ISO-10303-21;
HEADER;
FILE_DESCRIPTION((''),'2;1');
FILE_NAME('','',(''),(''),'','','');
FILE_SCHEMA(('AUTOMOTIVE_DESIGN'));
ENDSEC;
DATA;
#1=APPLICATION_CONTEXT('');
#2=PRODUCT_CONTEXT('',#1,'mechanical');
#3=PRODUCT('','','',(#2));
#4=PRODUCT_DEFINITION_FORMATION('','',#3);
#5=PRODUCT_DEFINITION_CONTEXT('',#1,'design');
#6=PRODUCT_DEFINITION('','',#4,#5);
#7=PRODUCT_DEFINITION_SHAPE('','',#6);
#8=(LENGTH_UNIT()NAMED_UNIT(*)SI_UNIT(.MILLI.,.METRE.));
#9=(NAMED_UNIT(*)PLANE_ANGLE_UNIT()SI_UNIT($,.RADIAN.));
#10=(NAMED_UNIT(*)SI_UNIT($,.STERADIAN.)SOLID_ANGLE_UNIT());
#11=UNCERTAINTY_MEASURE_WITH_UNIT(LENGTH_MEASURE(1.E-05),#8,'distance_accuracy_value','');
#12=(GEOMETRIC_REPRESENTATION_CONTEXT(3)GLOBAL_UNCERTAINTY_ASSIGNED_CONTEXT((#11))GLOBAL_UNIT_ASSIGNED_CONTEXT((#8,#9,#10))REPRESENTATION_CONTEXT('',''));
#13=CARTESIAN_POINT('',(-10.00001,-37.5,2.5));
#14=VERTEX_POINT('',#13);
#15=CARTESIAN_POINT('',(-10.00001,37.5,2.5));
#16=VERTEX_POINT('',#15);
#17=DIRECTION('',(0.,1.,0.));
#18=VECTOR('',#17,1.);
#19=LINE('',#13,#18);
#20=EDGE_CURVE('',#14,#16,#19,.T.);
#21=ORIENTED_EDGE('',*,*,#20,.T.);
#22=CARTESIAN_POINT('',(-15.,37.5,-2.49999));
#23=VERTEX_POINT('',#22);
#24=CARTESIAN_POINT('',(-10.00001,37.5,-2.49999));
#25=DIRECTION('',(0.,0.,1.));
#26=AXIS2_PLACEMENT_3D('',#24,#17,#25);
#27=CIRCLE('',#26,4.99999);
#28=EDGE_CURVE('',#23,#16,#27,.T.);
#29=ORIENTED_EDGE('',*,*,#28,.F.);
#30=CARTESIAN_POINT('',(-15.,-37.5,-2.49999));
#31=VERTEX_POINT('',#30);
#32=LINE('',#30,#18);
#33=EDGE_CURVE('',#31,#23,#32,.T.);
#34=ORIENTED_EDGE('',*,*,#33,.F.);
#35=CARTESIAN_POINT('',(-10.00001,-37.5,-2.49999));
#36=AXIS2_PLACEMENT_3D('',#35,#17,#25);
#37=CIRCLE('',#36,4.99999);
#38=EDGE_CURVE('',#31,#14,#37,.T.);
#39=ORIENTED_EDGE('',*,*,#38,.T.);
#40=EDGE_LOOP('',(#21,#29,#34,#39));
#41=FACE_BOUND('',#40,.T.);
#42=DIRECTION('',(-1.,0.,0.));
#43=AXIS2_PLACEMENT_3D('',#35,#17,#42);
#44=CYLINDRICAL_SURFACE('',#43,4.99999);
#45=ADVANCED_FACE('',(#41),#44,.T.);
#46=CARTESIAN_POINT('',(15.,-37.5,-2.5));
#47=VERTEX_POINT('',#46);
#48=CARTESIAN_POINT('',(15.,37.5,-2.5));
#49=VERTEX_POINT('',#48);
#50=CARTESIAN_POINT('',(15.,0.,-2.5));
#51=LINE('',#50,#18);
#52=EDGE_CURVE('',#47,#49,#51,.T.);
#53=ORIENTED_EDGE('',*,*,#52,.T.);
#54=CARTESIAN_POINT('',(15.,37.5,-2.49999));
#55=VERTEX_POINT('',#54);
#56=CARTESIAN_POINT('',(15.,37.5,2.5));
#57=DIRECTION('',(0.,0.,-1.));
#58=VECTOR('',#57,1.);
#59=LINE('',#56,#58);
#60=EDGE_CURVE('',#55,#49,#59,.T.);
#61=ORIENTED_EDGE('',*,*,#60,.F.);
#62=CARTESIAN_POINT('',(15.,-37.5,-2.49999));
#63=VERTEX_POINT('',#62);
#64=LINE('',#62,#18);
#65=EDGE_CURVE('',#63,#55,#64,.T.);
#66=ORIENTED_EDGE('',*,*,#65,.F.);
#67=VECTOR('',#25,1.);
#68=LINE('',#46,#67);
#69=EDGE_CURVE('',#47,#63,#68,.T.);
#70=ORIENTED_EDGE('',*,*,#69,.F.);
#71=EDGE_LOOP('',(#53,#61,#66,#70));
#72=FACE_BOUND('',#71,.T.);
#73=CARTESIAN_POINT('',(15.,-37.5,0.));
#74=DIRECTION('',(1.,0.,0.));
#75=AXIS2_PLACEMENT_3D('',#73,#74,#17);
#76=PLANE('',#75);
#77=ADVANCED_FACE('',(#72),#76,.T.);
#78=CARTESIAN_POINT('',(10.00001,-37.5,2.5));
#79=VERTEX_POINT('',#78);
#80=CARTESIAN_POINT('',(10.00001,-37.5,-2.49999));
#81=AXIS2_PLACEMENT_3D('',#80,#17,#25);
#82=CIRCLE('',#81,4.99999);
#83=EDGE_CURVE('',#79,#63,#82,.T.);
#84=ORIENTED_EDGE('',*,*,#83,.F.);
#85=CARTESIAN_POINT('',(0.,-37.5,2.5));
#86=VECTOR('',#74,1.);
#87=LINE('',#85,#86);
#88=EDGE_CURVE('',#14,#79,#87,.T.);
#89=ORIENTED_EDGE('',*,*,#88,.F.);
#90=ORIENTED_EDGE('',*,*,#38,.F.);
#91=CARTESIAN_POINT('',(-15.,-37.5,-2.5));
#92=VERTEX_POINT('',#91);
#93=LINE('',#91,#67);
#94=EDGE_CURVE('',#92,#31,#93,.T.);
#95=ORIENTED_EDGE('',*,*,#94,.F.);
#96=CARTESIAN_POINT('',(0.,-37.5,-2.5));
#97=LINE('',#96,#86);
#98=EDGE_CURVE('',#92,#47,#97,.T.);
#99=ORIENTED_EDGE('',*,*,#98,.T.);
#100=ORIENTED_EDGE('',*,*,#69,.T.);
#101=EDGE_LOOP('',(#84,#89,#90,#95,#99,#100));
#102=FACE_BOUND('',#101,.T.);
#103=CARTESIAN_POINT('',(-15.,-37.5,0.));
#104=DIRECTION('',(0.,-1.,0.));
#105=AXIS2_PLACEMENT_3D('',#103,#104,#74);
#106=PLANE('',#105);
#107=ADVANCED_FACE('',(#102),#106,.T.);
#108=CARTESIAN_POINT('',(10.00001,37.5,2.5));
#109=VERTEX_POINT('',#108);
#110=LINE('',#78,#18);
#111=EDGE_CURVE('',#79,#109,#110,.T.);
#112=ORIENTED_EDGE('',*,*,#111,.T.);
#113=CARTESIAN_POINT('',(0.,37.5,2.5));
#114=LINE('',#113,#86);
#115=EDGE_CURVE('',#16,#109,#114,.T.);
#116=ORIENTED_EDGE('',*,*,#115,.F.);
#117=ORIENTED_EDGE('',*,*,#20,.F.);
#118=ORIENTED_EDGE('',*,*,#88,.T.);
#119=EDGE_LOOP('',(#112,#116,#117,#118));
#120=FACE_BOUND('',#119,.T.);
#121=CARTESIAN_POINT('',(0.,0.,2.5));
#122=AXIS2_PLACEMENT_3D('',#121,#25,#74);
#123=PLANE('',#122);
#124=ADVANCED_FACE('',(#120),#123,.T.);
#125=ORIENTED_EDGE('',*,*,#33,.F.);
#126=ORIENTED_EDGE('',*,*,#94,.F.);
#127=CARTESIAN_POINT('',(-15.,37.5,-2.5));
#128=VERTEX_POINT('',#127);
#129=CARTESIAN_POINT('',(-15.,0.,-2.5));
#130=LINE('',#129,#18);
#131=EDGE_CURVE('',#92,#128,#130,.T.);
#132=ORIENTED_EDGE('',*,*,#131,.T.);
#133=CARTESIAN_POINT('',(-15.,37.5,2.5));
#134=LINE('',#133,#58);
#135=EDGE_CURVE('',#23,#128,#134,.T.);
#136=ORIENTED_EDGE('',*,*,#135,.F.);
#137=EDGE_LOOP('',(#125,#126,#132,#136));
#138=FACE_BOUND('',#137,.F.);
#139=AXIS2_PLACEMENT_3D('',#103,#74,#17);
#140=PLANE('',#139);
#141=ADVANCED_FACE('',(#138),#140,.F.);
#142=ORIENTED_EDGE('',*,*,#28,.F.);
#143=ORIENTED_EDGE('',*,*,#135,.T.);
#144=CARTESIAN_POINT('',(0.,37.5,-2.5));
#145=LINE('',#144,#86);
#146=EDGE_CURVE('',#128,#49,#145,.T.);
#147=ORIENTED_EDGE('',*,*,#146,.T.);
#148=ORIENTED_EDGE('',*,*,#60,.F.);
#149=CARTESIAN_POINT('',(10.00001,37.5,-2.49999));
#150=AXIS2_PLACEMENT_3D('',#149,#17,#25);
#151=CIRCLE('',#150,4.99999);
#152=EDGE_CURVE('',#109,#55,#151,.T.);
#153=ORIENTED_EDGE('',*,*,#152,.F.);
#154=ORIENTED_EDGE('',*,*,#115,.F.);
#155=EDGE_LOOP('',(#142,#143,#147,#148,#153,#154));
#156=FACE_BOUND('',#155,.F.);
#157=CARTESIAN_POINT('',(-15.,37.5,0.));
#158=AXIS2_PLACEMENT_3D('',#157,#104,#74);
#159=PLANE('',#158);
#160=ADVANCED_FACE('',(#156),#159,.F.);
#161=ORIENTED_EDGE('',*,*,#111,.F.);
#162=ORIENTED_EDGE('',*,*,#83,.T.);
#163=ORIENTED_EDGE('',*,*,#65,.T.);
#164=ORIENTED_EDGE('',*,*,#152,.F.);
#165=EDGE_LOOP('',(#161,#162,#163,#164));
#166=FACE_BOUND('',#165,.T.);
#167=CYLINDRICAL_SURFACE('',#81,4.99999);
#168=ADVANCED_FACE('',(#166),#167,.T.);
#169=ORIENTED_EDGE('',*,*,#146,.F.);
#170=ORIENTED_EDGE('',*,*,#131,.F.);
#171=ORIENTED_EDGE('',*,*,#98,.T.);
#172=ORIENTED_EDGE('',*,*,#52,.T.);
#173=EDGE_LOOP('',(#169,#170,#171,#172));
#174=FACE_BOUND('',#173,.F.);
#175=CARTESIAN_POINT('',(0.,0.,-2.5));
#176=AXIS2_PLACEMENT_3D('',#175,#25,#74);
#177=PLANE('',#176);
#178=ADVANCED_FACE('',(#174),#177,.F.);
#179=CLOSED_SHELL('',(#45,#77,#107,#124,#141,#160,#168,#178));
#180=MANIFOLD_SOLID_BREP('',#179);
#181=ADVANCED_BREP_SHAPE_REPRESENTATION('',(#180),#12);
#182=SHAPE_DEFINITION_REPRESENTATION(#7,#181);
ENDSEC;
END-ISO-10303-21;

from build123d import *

# Parameters (mm, degrees)
F0_W     = 30
F0_H     = 75
F1_DEPTH = 2.5
F2_R     = 4.99999


# Not quite as in the source:
# - a fillet or chamfer is up to 0.001 mm smaller than in the source, because OpenCascade refuses the exact size


with BuildPart() as f1:
    # F0 (on Top) → F1 (new body, symmetric)
    with BuildSketch(Plane.XY):
        Rectangle(F0_W, F0_H)
    extrude(amount=F1_DEPTH, both=True)

    # F2 (radius 5 in the source; OpenCascade refuses exactly that, so slightly less here)
    f2_edges = [f1.edges().sort_by_distance(p)[0] for p in [
        (15, 0, 2.5),
        (-15, 0, 2.5),
    ]]
    fillet(f2_edges, radius=F2_R)


solid = f1.part
